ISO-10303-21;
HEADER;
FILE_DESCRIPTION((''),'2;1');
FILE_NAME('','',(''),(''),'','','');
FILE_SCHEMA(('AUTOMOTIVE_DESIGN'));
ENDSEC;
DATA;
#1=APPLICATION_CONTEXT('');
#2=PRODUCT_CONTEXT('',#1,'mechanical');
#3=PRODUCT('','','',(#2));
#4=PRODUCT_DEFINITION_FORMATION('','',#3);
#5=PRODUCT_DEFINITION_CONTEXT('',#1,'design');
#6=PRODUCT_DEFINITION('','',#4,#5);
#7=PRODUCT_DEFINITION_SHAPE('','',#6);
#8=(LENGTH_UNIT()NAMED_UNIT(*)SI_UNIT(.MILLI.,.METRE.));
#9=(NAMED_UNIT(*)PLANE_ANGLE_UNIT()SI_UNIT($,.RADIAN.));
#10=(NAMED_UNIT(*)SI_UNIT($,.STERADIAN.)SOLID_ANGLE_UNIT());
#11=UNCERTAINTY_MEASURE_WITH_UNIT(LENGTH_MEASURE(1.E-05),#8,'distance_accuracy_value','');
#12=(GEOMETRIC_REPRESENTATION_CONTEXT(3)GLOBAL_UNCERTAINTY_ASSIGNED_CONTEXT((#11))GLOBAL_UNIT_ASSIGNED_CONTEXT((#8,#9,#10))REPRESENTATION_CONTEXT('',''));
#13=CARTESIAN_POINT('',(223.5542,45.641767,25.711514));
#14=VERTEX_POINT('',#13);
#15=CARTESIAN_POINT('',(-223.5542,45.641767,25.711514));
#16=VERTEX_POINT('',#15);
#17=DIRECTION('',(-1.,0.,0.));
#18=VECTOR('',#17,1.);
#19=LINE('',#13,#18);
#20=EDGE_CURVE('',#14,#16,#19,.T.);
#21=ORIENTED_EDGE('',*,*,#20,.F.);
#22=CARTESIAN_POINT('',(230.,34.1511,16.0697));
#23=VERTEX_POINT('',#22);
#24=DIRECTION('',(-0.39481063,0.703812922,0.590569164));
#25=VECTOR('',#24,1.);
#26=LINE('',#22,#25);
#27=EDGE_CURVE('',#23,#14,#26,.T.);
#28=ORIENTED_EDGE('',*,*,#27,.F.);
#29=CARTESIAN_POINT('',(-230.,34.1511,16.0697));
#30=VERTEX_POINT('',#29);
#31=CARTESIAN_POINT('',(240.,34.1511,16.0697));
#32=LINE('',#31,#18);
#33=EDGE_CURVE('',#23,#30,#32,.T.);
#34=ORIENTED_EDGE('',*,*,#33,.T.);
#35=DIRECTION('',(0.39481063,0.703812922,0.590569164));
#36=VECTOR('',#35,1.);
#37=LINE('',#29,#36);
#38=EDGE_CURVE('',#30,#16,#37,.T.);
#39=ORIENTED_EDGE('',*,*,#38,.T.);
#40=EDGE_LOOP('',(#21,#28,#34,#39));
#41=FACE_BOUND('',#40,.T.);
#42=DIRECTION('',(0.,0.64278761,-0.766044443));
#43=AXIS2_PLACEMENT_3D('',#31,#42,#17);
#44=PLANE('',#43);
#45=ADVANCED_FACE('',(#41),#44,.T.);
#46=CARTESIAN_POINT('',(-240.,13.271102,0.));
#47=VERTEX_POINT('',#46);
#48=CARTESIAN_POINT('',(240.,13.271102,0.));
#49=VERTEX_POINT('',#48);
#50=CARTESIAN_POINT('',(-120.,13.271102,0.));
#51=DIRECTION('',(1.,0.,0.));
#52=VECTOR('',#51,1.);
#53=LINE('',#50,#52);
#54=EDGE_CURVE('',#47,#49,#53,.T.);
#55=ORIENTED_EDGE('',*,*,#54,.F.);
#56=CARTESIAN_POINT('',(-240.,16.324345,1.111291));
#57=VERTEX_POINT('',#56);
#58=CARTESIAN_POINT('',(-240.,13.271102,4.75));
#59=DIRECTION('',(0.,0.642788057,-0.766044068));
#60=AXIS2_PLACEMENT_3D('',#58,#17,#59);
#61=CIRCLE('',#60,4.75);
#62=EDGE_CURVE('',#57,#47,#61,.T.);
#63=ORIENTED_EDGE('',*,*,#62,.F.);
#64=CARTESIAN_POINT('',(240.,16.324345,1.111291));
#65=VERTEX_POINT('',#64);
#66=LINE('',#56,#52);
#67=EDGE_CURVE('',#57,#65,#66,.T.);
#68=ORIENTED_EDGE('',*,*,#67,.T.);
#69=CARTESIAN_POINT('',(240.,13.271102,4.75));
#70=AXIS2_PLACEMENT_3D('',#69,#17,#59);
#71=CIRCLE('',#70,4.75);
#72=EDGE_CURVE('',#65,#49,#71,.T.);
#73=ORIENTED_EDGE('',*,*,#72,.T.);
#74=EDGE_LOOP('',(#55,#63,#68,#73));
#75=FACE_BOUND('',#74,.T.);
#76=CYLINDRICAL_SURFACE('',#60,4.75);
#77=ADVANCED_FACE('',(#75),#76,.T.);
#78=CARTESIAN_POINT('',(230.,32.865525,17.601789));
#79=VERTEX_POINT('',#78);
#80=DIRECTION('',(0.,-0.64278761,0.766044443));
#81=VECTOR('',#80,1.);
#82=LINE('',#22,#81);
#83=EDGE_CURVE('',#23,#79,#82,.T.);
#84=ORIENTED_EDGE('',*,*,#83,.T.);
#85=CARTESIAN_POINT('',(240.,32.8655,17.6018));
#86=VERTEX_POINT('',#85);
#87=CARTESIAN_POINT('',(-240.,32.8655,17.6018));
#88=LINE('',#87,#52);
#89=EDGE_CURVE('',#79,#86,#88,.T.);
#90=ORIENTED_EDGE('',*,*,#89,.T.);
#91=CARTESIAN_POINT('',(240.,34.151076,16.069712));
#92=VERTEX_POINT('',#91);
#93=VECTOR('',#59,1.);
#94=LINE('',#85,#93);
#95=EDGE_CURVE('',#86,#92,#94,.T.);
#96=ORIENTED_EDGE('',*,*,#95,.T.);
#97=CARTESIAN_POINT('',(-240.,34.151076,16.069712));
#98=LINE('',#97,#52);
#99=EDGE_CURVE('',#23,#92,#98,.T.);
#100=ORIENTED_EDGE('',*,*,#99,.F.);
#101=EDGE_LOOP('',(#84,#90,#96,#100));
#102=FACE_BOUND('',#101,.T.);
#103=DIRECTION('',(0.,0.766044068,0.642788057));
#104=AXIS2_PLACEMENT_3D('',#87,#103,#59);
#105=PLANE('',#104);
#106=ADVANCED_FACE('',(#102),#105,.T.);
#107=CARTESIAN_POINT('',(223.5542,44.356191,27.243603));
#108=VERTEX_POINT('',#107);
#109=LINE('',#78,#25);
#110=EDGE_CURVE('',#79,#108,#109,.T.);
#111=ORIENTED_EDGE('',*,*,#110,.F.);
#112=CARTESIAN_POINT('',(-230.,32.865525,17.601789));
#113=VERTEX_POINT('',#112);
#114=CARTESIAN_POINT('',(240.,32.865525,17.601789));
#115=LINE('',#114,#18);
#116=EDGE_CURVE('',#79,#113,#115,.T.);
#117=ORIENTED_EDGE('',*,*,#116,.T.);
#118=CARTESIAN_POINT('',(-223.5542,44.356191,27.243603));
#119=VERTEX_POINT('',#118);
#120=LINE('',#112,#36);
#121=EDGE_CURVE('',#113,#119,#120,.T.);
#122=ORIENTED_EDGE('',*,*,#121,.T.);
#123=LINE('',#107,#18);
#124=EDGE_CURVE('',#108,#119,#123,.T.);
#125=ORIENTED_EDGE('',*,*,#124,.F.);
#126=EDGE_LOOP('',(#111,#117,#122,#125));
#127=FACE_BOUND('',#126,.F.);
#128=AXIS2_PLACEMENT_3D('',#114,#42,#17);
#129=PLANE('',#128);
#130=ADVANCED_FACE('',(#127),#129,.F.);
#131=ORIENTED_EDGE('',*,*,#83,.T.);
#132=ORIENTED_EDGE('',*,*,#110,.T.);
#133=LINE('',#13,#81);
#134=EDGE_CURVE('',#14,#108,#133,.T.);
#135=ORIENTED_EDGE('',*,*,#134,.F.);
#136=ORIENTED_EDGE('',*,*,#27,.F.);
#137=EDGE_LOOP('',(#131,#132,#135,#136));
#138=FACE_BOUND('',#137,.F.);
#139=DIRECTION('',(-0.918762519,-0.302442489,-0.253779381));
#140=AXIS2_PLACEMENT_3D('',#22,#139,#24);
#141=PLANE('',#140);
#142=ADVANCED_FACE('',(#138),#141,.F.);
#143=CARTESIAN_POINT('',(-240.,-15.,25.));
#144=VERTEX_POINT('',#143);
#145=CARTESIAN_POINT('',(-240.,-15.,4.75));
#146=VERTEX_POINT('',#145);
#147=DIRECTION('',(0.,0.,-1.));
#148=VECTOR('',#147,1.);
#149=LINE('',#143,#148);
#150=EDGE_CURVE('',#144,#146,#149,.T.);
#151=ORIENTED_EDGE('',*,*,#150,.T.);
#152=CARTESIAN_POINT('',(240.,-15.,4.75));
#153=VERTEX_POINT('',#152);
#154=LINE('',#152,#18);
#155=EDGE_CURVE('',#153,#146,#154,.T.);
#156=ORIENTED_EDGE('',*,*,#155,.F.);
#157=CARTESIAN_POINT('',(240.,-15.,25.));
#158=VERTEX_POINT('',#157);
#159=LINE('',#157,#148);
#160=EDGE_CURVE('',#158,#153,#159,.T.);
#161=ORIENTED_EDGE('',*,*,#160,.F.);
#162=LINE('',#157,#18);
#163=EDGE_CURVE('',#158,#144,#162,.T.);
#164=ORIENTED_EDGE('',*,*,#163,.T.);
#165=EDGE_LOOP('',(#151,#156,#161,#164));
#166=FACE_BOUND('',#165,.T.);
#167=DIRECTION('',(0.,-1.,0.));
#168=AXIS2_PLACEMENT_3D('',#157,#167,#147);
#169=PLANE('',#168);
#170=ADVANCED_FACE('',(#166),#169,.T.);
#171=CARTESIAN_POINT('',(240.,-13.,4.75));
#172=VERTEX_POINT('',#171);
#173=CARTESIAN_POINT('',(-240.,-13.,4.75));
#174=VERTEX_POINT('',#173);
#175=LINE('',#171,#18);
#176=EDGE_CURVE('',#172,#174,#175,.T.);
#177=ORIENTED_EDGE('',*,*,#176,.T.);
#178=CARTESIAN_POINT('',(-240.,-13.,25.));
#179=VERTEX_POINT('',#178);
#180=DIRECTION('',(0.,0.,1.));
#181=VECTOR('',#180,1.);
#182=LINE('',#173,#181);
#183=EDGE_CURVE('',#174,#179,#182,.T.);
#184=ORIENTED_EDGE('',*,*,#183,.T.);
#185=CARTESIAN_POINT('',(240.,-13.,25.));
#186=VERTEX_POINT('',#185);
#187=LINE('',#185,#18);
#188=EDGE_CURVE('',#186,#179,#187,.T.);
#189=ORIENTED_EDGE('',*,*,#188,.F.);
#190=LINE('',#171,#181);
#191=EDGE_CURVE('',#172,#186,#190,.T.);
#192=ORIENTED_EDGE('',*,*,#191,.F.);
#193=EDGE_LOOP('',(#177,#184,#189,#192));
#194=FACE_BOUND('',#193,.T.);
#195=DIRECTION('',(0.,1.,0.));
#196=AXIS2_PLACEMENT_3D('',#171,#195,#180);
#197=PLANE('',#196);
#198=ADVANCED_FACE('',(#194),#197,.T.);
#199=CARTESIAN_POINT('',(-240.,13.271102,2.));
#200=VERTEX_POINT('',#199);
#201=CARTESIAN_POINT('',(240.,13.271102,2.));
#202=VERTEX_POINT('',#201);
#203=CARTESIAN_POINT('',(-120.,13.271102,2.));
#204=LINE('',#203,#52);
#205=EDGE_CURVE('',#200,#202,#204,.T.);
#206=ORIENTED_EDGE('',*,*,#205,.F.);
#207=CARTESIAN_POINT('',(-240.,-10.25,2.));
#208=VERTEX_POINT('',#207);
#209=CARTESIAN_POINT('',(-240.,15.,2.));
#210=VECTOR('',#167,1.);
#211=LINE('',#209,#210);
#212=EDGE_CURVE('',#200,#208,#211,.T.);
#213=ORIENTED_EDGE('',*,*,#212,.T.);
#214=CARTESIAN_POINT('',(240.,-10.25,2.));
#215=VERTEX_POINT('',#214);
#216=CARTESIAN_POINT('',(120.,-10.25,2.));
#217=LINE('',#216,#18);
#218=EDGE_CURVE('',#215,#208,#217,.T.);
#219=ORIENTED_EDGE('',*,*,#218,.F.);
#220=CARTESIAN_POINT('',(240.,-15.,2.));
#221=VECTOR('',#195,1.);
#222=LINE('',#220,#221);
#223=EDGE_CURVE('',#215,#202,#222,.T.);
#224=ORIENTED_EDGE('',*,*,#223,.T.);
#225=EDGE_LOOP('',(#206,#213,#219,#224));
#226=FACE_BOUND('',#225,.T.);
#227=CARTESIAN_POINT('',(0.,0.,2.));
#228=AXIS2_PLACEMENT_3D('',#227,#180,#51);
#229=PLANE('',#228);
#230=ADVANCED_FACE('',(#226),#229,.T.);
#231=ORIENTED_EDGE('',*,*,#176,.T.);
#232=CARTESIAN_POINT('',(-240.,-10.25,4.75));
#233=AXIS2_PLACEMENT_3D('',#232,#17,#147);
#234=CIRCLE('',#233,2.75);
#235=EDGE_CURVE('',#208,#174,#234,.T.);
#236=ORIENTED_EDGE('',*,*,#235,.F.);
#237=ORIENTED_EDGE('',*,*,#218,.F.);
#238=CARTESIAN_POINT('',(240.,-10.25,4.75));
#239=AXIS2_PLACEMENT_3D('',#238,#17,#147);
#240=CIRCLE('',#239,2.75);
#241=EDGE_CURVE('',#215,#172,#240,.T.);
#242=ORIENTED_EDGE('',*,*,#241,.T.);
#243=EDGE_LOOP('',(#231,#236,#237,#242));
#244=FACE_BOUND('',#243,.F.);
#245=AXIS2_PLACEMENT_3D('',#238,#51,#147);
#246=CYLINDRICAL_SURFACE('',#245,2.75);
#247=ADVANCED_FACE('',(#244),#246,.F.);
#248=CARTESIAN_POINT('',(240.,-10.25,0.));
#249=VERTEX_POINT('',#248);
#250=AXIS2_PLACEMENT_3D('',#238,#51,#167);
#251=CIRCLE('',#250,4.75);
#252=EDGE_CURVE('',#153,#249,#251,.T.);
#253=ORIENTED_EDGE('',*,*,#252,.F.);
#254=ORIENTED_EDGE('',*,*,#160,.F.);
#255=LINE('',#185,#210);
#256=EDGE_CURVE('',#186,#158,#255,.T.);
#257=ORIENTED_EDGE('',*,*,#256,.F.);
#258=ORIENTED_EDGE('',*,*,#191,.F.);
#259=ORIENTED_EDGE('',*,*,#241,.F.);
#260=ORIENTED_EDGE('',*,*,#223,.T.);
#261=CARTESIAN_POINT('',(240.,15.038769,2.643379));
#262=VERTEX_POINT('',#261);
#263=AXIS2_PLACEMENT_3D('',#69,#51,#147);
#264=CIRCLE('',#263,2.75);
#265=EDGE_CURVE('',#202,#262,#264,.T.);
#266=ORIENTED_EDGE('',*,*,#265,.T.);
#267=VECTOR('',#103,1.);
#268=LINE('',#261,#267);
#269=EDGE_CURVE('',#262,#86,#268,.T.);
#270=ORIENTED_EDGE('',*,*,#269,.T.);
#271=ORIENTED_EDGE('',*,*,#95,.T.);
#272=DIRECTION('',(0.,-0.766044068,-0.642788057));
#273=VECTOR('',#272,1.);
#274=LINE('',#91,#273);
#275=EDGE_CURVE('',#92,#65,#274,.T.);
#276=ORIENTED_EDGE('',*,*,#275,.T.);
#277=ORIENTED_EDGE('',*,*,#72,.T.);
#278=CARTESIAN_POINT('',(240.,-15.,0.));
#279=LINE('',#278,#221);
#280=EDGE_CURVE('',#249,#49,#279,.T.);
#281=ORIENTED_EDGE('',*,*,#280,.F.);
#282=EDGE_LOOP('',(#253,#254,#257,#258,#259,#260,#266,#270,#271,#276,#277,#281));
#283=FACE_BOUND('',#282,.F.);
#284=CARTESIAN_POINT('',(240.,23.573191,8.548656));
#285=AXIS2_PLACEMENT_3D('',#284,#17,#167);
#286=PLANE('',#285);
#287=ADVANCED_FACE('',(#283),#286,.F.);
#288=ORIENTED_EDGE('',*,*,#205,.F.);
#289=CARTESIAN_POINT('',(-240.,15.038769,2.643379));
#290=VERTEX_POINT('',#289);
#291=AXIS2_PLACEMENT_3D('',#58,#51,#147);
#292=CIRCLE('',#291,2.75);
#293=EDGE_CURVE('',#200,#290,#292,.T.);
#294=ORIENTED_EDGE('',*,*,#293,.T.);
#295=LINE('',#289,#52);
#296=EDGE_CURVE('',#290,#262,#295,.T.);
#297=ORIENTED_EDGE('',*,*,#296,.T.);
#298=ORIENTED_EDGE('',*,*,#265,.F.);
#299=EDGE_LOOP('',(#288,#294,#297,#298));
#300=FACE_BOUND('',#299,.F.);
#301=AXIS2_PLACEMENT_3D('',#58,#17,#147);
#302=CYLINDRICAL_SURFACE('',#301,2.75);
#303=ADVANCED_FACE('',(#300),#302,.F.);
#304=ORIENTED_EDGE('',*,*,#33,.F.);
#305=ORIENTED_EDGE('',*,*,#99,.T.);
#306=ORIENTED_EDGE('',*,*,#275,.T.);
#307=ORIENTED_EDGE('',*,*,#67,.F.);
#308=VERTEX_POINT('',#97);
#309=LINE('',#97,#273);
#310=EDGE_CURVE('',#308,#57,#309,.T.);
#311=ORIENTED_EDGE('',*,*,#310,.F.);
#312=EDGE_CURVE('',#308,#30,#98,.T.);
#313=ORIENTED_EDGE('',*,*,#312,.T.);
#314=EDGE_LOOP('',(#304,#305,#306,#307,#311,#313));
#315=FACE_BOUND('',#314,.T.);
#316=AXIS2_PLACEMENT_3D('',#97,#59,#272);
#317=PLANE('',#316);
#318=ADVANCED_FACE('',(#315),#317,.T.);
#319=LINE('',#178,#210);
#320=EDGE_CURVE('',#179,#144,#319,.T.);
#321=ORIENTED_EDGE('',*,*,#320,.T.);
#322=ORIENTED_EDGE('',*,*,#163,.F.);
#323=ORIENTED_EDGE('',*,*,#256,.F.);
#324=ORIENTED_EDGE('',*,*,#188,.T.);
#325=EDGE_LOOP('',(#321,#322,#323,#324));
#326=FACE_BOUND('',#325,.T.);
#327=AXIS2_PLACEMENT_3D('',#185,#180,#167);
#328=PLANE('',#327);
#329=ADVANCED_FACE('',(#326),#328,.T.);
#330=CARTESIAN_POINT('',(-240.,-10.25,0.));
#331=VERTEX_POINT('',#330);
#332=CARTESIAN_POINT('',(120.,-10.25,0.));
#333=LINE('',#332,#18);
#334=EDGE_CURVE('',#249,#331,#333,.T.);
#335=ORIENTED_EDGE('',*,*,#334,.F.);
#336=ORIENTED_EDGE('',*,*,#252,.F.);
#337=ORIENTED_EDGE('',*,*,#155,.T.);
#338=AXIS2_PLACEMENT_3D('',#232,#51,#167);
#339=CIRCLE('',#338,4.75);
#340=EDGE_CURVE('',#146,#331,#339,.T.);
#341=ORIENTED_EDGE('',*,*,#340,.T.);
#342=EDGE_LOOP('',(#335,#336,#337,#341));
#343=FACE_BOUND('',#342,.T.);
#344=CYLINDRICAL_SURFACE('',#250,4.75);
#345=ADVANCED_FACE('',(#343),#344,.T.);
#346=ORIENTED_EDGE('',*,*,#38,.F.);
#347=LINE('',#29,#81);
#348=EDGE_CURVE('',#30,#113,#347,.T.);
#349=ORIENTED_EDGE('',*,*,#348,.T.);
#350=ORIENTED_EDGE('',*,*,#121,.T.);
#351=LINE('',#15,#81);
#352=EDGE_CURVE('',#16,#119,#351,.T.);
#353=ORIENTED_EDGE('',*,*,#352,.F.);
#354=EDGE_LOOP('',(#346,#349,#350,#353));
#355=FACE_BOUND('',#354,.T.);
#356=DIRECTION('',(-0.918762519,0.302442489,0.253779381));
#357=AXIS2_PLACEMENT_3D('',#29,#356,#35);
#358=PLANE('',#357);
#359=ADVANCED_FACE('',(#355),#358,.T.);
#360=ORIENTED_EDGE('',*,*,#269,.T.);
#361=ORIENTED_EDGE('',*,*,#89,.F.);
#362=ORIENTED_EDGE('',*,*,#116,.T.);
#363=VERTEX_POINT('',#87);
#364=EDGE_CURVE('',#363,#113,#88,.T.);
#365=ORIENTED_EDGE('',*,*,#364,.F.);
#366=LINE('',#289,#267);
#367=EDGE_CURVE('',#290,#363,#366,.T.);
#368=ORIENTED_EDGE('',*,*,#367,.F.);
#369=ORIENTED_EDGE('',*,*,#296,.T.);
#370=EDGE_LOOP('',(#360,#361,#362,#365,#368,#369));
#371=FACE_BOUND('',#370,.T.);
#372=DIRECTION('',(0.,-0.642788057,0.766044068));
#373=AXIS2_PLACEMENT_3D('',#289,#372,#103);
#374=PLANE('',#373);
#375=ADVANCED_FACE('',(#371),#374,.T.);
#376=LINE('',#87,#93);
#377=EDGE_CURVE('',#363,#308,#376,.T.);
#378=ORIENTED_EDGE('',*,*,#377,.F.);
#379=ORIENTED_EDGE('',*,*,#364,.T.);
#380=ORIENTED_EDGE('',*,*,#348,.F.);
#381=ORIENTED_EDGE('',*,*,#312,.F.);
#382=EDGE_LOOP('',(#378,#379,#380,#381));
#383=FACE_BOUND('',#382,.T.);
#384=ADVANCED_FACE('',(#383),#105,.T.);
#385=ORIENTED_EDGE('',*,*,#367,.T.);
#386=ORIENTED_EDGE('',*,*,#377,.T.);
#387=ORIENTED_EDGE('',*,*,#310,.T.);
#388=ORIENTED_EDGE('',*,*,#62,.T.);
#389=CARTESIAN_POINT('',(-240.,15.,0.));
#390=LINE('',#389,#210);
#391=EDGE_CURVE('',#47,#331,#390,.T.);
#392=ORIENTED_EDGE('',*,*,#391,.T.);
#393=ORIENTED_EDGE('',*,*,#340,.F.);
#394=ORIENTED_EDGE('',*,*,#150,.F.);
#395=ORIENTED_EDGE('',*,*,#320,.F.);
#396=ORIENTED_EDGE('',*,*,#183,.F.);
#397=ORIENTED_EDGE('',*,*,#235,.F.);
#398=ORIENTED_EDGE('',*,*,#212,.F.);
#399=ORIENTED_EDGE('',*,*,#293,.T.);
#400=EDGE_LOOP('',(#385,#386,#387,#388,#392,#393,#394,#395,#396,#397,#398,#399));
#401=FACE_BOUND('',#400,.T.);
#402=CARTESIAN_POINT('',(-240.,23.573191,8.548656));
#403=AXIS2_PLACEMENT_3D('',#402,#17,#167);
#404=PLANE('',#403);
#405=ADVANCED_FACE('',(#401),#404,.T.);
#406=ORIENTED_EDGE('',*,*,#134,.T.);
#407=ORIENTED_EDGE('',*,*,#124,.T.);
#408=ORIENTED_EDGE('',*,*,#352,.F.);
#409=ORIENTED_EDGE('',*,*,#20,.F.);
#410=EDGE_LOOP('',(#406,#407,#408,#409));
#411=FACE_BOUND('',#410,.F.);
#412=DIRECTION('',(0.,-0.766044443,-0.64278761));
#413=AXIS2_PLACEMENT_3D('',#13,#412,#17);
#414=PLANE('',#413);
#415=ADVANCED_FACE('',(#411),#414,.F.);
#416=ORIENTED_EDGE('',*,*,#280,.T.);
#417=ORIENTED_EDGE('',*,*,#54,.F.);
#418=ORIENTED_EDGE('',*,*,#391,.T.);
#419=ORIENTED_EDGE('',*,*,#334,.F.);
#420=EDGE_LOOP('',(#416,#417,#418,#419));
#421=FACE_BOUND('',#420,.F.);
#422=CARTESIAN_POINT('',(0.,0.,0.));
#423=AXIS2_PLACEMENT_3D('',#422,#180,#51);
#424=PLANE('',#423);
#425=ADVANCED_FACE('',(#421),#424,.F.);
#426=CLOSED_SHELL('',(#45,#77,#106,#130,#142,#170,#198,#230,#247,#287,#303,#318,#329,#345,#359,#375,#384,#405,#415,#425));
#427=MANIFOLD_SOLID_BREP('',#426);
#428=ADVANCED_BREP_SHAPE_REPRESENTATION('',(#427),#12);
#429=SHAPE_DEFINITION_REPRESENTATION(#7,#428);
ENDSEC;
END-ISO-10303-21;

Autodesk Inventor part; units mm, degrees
ref_plane "YZ Plane" through (0, 0, 0) normal (1, 0, 0) x (0, 1, 0)
ref_plane "XZ Plane" through (0, 0, 0) normal (0, 1, 0) x (-1, 0, 0)
ref_plane "XY Plane" through (0, 0, 0) normal (0, 0, 1) x (1, 0, 0)
sketch "Sketch5" plane through (240, 34.1511, 16.0697) normal (0, 0.6427876, -0.7660444) x (-1, 0, 0)
  line L0 (0, 0) -> (480, 0)
  line L1 (0, 0) -> (480, 0)
  line L2 (470, 0) -> (463.5542, 15)
  line L3 (470, 0) -> (480, -23.2711)
  line L4 (0, -23.2711) -> (480, -23.2711)
  line L5 (0, -23.2711) -> (10, 0)
  line L6 (10, 0) -> (16.4458, 15)
  line L7 (16.4458, 15) -> (463.5542, 15)
  line L8 (240, -23.2711) -> (240, 0) construction
  point P0 (240, -36.4907)
  point P1 (10, 0)
  point P2 (470, 0)
  dimension "d32" = 10
  dimension "d33" = 15
sketch "Sketch1" plane through (0, 0, 0) normal (0, 0, 1) x (1, 0, 0)
  line L0 (-240, -15) -> (240, -15)
  line L1 (240, -15) -> (240, 15)
  line L2 (240, 15) -> (-240, 15)
  line L3 (-240, 15) -> (-240, -15)
  line L4 (-240, -15) -> (240, 15) construction
  line L5 (240, -15) -> (-240, 15) construction
  point P0 (0, 0)
  dimension "d0" = 480
  dimension "d1" = 30
extrude "Plate1" add sketch "Sketch1" along normal blind 2
sketch "Sketch2" plane through (0, 0, 0) normal (0, 0, -1) x (-1, 0, 0)
  line L0 (-220, 5) -> (-20, 5) construction
  line L1 (-20, 5) -> (-20, -15) construction
  line L2 (-20, -15) -> (-220, -15) construction
  line L3 (-220, -15) -> (-220, 5) construction
  line L4 (-240, 15) -> (240, 15) projected
  line L5 (-240, -15) -> (-240, 15) projected
  point P0 (0, 0)
  dimension "d6" = 200
  dimension "d9" = 20
  dimension "d10" = 10
  dimension "d11" = 20
mark "Mark1"
sketch "Sketch3" plane through (240, -13, 0) normal (0, -1, 0) x (1, 0, 0)
  line L0 (-480, 0) -> (0, 0)
  line L1 (0, 0) -> (0, 25)
  line L2 (0, 25) -> (-480, 25)
  line L3 (-480, 25) -> (-480, 0)
edge flange "Flange1" height 25 angle 90 thickness 2 bend radius 2.75 thickness toward (0, -1, 0) relief round relief width 2 relief depth 1 edges at (0, -15, 2) wall of the first edge with corners at (-240, -13, 0) (240, -13, 0) (240, -13, 25) (-240, -13, 25)
bend "Bend1"
corner "Corner1"
sketch "Sketch4" plane through (-240, 13.7144, 1.5321) normal (0, 0.6427876, -0.7660444) x (-1, 0, 0)
  line L0 (-480, 0) -> (0, 0)
  line L1 (0, 0) -> (0, 25)
  line L2 (0, 25) -> (-480, 25)
  line L3 (-480, 25) -> (-480, 0)
edge flange "Flange2" height 25 angle 40 thickness 2 bend radius 2.75 thickness toward (0, 0.6427876, -0.7660444) relief round relief width 2 relief depth 1 edges at (0, 15, 2) wall of the first edge with corners at (240, 13.7144, 1.5321) (-240, 13.7144, 1.5321) (-240, 32.8655, 17.6018) (240, 32.8655, 17.6018)
bend "Bend2"
corner "Corner2"
sheet face with bend "Face2" sketch "Sketch5" thickness 2 toward (0, -0.6427876, 0.7660444) bend radius 2.75 contours L6 L7 L2 L0
bend "Bend3"
equation "\"d2\" = Thickness"
equation "\"d12\" = BendReliefWidth"
equation "\"d13\" = BendReliefDepth"
equation "\"d14\" = MinimumRemnant"
equation "\"d15\" = TransitionRadius"
equation "\"d18\" = BendRadius"
equation "\"d19\" = CornerReliefSize"
equation "\"d20\" = GapSize"
equation "\"d21\" = JacobiRadiusSize"
equation "\"d22\" = BendReliefWidth"
equation "\"d23\" = BendReliefDepth"
equation "\"d24\" = MinimumRemnant"
equation "\"d25\" = TransitionRadius"
equation "\"d28\" = BendRadius"
equation "\"d29\" = CornerReliefSize"
equation "\"d30\" = GapSize"
equation "\"d31\" = JacobiRadiusSize"
equation "\"d34\" = BendRadius"
equation "\"d37\" = MinimumRemnant"
equation "\"d35\" = BendReliefWidth"
equation "\"d36\" = BendReliefDepth"
equation "\"d38\" = TransitionRadius"
equation "\"BendReliefWidth\" = Thickness"
equation "\"BendReliefDepth\" = 0.5 * Thickness"
equation "\"CornerReliefSize\" = 4 * Thickness"
equation "\"MinimumRemnant\" = 2 * Thickness"
equation "\"TransitionRadius\" = BendRadius"
equation "\"JacobiRadiusSize\" = BendRadius"
equation "\"GapSize\" = Thickness"
equation "\"Thickness\" = 2"
equation "\"BendRadius\" = 2.75"
properties part number "TRM 024 top damper" material "AISI 304"
